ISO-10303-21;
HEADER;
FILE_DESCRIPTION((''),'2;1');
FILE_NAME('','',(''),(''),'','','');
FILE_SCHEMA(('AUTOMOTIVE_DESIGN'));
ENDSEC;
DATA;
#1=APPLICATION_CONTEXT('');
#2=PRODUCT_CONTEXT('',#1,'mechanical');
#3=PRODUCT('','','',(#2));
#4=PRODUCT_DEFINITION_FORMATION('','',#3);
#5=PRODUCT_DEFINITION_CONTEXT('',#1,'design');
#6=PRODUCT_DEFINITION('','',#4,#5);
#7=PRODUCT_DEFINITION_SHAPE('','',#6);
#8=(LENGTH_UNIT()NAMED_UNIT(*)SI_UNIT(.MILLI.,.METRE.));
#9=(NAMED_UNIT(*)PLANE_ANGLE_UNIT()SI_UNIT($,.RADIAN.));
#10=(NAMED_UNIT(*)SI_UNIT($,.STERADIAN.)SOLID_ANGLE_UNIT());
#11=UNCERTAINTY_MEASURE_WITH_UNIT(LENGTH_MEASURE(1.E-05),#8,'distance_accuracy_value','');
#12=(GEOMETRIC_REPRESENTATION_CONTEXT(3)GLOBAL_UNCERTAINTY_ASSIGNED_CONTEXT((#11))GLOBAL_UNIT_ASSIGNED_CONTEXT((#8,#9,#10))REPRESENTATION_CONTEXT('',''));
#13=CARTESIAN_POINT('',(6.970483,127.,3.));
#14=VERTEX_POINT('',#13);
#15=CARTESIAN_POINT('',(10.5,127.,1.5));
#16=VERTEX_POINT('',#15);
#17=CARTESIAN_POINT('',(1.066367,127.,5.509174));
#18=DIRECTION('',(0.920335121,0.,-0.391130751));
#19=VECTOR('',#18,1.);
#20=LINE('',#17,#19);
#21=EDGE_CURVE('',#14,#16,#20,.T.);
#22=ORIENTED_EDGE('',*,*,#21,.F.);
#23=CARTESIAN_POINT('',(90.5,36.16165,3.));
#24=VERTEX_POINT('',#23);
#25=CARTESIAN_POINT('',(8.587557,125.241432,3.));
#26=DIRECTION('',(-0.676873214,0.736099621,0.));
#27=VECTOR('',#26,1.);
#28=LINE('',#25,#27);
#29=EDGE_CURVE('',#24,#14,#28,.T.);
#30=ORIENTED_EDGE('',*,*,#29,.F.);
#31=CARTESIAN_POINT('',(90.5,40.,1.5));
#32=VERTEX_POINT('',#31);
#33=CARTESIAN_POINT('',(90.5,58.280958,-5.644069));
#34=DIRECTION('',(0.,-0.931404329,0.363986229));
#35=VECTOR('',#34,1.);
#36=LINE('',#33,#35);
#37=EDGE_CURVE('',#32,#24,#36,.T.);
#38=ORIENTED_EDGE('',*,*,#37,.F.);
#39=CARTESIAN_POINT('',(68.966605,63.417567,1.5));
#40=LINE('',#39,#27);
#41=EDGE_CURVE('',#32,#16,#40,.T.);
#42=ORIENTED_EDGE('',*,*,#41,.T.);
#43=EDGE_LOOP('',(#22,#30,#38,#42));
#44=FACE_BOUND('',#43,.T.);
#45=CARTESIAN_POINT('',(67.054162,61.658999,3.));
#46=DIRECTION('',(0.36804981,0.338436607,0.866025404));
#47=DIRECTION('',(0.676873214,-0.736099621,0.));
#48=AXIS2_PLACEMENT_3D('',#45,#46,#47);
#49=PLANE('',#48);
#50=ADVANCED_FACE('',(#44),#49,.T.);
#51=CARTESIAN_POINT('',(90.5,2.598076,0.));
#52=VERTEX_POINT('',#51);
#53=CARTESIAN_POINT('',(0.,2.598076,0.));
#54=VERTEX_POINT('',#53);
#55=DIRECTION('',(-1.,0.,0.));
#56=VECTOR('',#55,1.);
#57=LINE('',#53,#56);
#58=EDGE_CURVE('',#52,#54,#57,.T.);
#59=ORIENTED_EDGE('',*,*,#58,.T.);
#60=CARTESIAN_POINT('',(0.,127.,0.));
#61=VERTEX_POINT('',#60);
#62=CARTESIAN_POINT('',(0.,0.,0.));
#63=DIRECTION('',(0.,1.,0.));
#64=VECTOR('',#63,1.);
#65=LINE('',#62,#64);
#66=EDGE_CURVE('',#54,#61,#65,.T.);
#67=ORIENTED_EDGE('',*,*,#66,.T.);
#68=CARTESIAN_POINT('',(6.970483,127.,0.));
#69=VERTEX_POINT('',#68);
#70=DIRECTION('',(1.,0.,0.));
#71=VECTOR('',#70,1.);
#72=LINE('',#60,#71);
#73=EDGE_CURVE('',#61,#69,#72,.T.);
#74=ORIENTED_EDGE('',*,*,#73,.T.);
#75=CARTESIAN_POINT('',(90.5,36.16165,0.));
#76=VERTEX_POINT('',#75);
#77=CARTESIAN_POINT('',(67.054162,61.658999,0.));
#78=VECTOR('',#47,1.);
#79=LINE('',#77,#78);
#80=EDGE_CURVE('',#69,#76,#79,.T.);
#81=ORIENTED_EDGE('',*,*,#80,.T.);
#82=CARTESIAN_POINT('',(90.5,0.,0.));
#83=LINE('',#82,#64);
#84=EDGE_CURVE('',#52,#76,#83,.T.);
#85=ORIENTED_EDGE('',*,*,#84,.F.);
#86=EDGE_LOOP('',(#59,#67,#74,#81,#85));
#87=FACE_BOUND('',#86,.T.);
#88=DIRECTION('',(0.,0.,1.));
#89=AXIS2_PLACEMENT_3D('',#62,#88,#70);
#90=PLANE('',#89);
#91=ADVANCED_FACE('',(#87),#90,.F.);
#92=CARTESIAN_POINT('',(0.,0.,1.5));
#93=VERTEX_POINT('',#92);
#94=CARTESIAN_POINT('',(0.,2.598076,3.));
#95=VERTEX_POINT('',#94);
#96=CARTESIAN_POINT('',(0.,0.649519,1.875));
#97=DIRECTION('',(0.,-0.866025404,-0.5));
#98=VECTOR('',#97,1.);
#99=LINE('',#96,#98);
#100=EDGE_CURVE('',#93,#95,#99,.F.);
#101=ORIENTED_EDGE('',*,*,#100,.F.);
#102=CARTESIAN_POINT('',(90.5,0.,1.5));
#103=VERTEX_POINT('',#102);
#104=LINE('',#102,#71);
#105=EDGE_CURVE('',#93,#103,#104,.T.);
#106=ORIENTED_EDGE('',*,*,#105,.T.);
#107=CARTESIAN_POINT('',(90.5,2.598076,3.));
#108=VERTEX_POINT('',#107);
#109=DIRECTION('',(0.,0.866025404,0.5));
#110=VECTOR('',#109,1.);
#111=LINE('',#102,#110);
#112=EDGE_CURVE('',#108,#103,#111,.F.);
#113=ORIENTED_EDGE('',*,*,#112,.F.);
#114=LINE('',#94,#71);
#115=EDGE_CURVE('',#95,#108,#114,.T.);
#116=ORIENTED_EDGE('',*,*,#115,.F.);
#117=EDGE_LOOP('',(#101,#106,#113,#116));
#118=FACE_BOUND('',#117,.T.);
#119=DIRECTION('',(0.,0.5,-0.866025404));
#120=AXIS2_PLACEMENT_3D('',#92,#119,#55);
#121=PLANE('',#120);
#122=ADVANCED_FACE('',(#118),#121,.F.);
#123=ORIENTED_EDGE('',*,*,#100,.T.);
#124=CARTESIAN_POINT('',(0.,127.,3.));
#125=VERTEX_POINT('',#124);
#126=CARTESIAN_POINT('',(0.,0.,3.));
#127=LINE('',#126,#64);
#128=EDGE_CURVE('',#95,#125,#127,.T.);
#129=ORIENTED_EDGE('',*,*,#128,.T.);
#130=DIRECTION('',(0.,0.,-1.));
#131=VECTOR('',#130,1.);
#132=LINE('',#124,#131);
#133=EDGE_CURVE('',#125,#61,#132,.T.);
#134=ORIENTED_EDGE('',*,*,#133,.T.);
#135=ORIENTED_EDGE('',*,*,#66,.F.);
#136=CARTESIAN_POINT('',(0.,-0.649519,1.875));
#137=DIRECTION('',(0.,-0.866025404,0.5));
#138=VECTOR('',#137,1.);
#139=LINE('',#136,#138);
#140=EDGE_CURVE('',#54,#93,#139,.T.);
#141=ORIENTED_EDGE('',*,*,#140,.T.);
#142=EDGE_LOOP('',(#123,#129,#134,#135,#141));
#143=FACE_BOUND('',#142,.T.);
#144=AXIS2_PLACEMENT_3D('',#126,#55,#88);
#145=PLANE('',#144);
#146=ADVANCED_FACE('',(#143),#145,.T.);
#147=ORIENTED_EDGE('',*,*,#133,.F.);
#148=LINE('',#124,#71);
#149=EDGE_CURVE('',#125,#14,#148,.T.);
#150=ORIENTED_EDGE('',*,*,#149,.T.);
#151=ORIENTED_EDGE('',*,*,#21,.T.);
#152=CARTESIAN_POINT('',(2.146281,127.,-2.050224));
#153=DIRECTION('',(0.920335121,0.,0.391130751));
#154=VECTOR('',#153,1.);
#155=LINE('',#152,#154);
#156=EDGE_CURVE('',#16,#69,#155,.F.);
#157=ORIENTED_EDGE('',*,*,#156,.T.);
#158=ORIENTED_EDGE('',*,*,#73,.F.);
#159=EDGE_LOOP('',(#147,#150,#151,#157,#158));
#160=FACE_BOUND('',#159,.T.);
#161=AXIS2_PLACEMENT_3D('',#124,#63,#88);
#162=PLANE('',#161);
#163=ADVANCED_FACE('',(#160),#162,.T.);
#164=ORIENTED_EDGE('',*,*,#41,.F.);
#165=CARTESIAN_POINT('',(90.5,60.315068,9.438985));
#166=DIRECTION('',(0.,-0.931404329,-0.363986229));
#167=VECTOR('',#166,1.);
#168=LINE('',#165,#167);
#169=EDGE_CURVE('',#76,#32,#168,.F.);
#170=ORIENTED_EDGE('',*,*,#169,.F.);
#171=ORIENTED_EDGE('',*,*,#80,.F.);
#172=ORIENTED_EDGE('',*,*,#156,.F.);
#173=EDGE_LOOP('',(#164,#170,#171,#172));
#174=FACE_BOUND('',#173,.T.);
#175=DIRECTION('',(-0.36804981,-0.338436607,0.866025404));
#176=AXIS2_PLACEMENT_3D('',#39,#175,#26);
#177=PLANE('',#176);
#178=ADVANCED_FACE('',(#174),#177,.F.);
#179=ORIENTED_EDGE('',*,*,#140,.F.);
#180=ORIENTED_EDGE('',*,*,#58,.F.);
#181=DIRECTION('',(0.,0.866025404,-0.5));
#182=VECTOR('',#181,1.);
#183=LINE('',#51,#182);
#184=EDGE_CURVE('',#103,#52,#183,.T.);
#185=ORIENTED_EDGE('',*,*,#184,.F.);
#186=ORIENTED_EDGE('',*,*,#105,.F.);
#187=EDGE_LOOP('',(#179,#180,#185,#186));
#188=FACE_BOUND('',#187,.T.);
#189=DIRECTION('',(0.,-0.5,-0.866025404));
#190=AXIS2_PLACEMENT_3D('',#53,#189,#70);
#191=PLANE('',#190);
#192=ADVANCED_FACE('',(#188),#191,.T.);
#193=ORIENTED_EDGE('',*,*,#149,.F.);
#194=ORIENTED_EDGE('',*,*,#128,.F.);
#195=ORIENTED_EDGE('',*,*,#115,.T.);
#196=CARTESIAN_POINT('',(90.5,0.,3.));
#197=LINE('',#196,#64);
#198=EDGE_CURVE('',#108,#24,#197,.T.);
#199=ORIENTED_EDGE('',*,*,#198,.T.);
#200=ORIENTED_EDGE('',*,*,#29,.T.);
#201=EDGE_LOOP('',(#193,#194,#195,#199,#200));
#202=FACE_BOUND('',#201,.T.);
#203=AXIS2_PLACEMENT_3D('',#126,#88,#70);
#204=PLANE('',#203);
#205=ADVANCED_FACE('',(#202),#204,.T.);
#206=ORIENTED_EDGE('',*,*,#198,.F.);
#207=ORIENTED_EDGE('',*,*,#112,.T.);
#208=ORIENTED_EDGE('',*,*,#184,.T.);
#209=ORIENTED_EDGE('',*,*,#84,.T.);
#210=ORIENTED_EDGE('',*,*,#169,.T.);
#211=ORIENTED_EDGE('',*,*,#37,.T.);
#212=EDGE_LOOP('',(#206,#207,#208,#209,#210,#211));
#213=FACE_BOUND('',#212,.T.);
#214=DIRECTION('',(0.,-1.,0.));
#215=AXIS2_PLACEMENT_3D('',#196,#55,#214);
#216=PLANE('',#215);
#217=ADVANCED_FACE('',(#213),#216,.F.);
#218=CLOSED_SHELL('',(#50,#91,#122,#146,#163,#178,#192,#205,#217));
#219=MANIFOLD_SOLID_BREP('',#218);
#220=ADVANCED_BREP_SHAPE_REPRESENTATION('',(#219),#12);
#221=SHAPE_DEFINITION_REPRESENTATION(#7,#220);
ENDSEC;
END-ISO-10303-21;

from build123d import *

# Parameters (mm, degrees)
BOSS_EXTRUDE1_DEPTH = 3
CHAMFER7_SIZE       = 1.5
CHAMFER7_SIZE_2     = 2.598076211


with BuildPart() as part:
    # Sketch1 → Boss-Extrude1 (new body)
    with BuildSketch(Plane.XY):
        Polygon((90.5, 0), (90.5, 40), (10.5, 127), (0, 127), (0, 0), align=None)
    extrude(amount=BOSS_EXTRUDE1_DEPTH)

    # Chamfer7
    # the kernel refuses this chamfer: 2.598076211, 1.5 mm, written as the material it takes off along each edge
    with BuildSketch(Plane(origin=(-6.721445956, 0, 3), x_dir=(0, -0.0578938624026714, -0.9983227437537926), z_dir=(1, 0, 0))) as chamfer7_piece_1:
        Polygon((CHAMFER7_SIZE * 0.998322743754, CHAMFER7_SIZE * 0.0578938624027), (-CHAMFER7_SIZE_2 * 0.0578938624105, CHAMFER7_SIZE_2 * 0.99832274389), (0, 0), align=None)
    extrude(amount=103.942891912, mode=Mode.SUBTRACT)
    with BuildSketch(Plane(origin=(-6.721445956, 0, 0), x_dir=(0, -0.0578938624026714, 0.9983227437537926), z_dir=(1, 0, 0))) as chamfer7_piece_2:
        Polygon((CHAMFER7_SIZE * 0.998322743754, -CHAMFER7_SIZE * 0.0578938624027), (-CHAMFER7_SIZE_2 * 0.0578938624105, -CHAMFER7_SIZE_2 * 0.99832274389), (0, 0), align=None)
    extrude(amount=103.942891912, mode=Mode.SUBTRACT)
    with BuildSketch(Plane(origin=(95.04956673, 35.052346181, 3), x_dir=(0.042615650155104184, 0.03918680474032571, -0.9983227437537929), z_dir=(-0.6768732144311417, 0.7360996206938663, 0))) as chamfer7_piece_3:
        Polygon((CHAMFER7_SIZE * 0.998322743754, CHAMFER7_SIZE * 0.0578938624027), (-CHAMFER7_SIZE_2 * 0.0578938624105, CHAMFER7_SIZE_2 * 0.99832274389), (0, 0), align=None)
    extrude(amount=131.633416067, mode=Mode.SUBTRACT)
    with BuildSketch(Plane(origin=(95.04956673, 35.052346181, 0), x_dir=(0.042615650155104184, 0.03918680474032571, 0.9983227437537929), z_dir=(-0.6768732144311417, 0.7360996206938663, 0))) as chamfer7_piece_4:
        Polygon((CHAMFER7_SIZE * 0.998322743754, -CHAMFER7_SIZE * 0.0578938624027), (-CHAMFER7_SIZE_2 * 0.0578938624105, -CHAMFER7_SIZE_2 * 0.99832274389), (0, 0), align=None)
    extrude(amount=131.633416067, mode=Mode.SUBTRACT)


solid = part.part
